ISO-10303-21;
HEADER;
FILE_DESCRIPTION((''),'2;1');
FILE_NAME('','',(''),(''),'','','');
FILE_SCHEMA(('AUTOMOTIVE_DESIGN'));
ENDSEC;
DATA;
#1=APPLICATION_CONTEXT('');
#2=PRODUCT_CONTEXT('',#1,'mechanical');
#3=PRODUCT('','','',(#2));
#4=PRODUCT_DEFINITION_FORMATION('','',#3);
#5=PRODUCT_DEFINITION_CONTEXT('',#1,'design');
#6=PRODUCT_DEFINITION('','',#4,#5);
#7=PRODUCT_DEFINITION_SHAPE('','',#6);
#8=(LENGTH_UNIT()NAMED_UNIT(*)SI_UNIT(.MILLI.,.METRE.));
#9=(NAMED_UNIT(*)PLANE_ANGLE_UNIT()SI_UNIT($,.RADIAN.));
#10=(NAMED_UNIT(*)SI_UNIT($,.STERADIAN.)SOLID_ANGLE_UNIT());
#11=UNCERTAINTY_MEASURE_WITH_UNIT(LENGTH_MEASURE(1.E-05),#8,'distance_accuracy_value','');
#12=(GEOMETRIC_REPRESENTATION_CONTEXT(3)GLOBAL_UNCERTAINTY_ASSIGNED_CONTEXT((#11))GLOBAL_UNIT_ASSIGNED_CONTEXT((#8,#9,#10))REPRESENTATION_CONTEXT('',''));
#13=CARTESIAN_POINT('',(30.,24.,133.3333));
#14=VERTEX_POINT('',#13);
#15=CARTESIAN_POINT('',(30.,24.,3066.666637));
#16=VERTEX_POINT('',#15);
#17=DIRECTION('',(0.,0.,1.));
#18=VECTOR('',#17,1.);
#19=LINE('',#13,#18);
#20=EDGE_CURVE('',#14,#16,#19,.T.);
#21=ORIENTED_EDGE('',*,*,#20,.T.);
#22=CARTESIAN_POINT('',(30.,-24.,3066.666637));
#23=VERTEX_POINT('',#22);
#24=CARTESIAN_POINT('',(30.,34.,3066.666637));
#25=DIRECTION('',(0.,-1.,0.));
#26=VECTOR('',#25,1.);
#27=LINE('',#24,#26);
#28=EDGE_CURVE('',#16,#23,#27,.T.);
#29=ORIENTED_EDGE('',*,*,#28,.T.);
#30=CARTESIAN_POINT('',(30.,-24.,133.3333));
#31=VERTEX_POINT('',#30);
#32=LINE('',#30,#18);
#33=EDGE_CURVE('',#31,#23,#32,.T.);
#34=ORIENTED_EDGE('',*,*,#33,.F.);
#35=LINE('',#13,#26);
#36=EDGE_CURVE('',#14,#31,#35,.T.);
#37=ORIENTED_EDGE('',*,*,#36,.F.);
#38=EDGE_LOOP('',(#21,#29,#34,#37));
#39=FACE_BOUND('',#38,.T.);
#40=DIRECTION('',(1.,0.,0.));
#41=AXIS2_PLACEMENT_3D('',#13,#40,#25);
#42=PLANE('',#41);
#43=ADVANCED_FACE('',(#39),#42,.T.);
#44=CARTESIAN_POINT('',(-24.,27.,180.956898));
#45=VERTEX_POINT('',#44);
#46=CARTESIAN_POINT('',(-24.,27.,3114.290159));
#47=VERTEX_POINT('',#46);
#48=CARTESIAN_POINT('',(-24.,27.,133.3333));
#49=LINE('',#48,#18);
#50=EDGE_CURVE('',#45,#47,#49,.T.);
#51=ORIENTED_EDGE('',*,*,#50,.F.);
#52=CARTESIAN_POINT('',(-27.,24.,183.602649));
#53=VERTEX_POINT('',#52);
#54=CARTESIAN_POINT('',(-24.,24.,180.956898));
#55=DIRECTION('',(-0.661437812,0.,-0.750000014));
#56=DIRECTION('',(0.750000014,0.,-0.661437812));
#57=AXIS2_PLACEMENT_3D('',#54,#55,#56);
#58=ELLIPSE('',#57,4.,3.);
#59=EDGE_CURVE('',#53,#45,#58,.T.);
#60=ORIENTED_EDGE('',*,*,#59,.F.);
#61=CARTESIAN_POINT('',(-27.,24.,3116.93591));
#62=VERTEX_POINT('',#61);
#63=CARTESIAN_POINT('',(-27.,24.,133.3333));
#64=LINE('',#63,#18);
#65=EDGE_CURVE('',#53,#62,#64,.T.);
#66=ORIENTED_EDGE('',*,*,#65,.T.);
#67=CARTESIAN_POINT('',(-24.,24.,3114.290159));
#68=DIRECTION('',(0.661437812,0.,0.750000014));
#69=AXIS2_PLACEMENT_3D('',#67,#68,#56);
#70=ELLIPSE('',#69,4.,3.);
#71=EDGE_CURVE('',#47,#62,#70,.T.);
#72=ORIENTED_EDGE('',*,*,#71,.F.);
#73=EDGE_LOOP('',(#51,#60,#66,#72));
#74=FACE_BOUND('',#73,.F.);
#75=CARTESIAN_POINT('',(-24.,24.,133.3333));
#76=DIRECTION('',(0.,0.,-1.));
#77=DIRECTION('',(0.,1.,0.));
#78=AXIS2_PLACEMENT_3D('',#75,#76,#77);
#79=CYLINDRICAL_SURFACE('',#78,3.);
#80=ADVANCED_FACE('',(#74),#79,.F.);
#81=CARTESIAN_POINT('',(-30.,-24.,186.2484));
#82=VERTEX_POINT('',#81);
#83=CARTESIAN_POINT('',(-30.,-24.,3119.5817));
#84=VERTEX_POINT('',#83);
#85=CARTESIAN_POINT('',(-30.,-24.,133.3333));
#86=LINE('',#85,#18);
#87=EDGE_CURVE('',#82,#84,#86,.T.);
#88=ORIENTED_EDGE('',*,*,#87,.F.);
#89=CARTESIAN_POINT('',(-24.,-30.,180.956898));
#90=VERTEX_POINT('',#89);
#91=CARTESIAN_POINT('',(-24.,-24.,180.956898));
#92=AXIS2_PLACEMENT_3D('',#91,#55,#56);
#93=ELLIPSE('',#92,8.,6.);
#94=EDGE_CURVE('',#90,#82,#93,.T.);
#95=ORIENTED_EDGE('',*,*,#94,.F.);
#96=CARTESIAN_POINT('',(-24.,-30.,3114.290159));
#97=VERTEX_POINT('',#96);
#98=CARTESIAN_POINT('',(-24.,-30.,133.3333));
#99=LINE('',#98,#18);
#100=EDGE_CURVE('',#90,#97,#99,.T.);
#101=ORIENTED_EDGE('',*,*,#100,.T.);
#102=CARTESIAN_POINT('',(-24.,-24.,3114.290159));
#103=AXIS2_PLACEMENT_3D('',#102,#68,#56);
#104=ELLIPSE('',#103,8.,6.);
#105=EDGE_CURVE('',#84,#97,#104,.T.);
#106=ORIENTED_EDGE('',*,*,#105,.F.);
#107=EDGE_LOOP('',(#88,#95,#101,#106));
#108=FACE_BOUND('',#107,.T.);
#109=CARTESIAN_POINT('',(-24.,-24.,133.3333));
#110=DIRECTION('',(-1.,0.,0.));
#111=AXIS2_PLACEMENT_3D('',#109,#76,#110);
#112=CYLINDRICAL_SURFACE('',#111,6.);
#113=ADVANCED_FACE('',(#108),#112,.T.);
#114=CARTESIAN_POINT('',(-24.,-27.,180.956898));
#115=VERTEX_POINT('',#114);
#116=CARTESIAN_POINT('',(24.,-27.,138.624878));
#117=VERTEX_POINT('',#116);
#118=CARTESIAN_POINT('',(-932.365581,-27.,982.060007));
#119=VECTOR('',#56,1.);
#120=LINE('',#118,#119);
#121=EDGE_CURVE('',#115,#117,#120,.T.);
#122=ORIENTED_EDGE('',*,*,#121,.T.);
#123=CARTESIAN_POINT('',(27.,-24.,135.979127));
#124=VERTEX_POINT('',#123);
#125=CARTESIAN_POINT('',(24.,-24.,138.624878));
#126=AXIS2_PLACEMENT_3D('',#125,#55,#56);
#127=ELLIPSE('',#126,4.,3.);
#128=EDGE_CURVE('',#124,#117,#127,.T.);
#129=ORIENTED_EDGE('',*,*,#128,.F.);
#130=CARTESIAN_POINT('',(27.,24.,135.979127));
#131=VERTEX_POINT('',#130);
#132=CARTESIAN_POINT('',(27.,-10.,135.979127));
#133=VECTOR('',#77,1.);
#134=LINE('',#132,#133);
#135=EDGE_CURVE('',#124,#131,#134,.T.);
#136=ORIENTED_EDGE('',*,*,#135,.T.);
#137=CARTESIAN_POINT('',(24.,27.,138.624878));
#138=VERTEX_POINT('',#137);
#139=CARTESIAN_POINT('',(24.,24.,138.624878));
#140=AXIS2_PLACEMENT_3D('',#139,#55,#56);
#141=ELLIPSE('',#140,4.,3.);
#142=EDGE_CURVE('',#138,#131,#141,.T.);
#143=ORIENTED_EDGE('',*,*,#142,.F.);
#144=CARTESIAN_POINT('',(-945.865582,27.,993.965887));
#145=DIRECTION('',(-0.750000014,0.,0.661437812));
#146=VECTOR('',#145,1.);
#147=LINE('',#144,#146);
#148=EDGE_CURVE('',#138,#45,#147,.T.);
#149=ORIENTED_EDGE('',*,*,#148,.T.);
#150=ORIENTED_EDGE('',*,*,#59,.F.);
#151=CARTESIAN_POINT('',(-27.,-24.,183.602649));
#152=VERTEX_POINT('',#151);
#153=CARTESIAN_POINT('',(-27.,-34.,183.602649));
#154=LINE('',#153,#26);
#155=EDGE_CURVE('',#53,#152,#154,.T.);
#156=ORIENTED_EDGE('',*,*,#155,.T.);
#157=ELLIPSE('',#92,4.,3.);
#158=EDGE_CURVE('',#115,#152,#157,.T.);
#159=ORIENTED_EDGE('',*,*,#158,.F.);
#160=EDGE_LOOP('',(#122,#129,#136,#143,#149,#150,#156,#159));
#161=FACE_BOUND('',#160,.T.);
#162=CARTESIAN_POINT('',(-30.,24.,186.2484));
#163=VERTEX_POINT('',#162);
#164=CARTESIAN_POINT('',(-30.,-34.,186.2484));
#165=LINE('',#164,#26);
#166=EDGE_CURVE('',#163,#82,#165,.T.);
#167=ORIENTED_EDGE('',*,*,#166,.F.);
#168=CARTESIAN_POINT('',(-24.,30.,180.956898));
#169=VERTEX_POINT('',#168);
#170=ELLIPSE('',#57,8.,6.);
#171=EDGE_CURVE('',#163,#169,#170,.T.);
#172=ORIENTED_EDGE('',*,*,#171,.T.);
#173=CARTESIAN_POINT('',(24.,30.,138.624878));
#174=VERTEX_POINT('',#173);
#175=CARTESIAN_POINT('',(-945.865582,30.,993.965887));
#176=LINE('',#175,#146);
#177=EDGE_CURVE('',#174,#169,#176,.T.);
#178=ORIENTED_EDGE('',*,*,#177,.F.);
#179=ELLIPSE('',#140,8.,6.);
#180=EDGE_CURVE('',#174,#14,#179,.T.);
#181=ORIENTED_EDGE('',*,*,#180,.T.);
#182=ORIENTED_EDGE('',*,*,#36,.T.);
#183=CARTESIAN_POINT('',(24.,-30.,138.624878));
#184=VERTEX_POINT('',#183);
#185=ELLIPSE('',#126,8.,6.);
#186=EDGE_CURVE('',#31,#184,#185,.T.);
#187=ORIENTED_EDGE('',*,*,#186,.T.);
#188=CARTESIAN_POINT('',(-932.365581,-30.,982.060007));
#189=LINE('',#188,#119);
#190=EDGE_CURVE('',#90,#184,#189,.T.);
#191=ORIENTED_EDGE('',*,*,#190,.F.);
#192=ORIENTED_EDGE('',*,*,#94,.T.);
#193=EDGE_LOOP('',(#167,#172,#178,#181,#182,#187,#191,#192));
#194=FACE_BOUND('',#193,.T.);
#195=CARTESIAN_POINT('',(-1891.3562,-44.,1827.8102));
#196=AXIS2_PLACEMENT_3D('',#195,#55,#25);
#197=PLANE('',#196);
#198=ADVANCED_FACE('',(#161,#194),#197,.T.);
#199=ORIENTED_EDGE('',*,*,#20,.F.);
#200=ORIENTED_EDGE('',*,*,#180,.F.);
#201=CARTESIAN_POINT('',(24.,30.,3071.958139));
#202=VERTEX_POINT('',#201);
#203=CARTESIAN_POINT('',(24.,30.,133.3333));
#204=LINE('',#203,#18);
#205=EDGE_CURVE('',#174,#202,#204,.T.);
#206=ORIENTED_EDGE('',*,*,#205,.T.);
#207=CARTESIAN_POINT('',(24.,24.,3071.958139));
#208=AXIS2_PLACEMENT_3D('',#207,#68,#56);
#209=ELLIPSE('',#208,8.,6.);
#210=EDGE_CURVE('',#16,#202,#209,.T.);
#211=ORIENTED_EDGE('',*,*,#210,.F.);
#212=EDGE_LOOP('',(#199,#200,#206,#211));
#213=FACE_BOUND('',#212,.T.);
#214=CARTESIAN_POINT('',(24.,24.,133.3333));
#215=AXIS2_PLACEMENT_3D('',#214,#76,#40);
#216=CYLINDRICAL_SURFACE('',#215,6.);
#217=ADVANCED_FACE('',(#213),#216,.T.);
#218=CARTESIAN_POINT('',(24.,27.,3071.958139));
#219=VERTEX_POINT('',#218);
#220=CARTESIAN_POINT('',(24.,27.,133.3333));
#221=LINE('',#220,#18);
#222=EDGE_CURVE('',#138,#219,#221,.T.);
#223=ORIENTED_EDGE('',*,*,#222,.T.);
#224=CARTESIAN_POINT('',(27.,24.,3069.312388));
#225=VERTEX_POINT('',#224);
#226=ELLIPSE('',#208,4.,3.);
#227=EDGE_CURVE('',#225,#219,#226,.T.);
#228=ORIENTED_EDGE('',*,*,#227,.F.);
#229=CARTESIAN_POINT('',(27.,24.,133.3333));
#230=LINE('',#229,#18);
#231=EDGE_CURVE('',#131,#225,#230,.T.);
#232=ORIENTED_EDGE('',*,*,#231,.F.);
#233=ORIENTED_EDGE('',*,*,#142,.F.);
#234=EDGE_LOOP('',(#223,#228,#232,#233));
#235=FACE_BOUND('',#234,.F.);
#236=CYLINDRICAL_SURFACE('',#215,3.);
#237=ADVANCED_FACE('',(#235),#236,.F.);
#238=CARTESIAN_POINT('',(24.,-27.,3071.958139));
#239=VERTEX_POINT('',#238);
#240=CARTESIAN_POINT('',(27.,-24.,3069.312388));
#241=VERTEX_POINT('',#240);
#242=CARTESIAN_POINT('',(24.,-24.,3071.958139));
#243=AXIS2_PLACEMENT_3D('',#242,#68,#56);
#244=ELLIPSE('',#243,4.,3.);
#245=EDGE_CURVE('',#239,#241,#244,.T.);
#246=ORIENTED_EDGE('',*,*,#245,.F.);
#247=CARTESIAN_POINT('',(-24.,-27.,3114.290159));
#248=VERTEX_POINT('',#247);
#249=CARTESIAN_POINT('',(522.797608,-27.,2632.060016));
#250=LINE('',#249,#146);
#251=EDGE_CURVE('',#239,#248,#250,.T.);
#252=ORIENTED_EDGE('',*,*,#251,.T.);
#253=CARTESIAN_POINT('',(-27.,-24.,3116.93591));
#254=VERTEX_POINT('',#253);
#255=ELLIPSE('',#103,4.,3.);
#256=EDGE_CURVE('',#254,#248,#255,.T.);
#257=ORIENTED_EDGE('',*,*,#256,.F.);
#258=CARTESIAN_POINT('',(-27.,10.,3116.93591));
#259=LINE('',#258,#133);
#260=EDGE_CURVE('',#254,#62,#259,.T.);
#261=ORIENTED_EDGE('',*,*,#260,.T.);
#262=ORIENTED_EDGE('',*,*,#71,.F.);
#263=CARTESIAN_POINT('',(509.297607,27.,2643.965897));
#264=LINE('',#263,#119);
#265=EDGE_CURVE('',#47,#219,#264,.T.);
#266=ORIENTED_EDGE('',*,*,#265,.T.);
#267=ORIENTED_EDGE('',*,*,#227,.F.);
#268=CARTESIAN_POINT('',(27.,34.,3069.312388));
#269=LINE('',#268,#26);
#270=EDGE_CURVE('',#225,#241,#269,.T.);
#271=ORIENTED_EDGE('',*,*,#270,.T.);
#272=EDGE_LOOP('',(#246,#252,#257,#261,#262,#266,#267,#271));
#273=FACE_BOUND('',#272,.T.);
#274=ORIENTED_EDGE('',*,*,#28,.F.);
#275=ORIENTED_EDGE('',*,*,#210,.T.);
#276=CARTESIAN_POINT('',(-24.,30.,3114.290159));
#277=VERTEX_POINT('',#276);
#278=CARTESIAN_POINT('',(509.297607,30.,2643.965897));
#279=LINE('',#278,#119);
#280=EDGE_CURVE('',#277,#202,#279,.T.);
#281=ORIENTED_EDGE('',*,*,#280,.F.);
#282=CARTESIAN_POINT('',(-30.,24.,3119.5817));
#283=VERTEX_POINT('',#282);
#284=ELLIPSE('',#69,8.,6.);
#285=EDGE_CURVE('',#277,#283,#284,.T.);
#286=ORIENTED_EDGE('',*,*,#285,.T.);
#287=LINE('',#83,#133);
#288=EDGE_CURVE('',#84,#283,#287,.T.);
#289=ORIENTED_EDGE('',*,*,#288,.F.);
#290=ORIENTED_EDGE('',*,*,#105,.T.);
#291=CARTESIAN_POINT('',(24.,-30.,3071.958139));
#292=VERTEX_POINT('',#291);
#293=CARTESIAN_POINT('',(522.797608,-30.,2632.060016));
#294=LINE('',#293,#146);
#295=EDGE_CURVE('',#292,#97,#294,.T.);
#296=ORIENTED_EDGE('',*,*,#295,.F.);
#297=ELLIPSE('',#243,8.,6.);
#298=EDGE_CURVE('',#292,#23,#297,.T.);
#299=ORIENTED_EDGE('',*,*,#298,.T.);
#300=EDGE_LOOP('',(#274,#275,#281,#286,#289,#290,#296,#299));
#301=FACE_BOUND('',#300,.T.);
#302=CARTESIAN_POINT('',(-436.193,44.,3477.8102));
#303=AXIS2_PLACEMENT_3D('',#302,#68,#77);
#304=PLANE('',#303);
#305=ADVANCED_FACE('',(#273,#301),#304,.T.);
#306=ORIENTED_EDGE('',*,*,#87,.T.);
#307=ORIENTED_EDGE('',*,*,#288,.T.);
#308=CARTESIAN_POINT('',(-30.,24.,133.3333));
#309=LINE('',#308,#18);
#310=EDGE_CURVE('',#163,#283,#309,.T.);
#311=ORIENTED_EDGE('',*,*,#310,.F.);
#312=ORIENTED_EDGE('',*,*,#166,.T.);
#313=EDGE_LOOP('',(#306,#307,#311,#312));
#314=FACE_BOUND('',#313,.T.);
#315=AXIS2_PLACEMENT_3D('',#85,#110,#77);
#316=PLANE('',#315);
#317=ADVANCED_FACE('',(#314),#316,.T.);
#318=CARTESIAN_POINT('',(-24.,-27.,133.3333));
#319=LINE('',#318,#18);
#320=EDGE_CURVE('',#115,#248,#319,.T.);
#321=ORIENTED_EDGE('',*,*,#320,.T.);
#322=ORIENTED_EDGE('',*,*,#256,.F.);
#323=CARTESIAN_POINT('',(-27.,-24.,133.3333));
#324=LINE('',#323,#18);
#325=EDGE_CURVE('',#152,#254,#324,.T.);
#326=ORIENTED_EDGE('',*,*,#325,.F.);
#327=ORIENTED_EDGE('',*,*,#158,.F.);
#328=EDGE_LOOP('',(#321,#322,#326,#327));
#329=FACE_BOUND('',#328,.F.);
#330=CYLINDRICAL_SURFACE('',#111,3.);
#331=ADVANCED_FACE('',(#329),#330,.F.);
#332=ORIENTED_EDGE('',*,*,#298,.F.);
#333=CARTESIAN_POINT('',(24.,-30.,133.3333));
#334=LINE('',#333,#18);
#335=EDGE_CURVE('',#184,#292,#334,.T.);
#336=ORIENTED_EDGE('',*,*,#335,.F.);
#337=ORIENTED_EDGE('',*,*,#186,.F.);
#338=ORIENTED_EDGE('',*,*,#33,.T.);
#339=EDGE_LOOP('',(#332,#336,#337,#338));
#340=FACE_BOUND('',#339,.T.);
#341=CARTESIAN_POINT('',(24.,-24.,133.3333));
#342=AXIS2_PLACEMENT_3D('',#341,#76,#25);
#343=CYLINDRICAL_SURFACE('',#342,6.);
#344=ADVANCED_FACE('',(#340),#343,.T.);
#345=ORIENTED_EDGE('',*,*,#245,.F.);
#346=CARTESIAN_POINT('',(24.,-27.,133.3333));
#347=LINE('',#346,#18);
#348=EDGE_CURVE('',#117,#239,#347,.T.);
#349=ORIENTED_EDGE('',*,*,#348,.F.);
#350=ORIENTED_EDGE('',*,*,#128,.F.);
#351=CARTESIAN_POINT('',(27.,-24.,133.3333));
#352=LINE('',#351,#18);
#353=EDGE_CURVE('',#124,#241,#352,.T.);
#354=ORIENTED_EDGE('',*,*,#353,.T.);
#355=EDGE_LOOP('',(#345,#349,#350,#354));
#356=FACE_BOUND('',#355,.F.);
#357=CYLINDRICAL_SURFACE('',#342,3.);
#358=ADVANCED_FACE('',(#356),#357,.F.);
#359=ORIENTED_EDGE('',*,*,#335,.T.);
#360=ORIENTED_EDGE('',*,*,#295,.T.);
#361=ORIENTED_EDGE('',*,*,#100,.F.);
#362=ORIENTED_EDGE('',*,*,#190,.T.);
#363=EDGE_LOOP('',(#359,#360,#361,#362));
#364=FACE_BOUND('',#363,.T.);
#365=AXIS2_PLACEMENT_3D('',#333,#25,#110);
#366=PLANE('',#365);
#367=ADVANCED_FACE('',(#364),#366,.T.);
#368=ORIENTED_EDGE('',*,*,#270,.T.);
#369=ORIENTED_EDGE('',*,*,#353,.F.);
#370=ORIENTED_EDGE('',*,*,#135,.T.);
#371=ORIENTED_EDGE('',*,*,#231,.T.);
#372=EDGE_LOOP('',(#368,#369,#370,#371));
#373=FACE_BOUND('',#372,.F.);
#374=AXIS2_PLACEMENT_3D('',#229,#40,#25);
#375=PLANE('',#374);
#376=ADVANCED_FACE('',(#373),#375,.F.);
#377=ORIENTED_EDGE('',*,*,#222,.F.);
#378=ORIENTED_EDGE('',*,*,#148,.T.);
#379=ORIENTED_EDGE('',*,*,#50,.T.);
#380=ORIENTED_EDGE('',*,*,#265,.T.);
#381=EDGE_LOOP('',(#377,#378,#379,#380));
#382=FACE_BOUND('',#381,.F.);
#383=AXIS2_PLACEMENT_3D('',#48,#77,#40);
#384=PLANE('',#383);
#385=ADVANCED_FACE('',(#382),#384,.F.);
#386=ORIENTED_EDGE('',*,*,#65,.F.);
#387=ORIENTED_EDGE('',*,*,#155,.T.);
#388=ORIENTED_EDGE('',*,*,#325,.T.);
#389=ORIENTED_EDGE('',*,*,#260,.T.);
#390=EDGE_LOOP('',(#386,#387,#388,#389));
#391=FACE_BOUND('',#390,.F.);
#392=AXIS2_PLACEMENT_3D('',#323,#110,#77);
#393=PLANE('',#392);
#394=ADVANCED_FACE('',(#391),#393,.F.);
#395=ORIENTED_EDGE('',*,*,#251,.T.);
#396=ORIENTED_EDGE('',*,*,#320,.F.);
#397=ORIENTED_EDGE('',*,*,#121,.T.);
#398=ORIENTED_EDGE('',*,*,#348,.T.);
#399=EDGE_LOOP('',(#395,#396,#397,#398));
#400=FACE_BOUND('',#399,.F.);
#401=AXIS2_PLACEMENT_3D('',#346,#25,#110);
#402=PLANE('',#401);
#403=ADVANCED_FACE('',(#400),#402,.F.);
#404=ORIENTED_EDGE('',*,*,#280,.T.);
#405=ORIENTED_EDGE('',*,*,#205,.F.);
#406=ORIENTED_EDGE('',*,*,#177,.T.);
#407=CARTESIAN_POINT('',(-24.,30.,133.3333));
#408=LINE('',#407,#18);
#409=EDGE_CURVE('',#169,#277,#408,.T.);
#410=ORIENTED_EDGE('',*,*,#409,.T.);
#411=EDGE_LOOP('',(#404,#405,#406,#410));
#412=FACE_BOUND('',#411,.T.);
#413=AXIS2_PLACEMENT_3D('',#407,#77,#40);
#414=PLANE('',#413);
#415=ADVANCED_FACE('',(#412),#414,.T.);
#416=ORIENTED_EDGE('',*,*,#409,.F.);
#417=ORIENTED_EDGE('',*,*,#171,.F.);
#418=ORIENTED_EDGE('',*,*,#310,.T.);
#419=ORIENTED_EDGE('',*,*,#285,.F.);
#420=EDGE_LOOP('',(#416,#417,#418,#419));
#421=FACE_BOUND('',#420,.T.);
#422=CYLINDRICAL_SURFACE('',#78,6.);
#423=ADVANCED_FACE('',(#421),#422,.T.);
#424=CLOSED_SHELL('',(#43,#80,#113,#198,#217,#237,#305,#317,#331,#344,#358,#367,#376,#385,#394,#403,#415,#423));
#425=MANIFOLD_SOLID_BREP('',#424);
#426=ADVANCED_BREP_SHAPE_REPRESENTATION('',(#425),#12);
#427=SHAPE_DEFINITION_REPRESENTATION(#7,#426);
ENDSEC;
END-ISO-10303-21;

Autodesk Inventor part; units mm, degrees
ref_plane "Start plane" through (0, 0, 133.3333) normal (0, 0, 1) x (1, 0, 0)
ref_plane "End plane" through (0, 0, 3119.5817) normal (0, 0, 1) x (1, 0, 0)
sketch "Sketch" plane through (0, 0, 0) normal (0, 0, 1) x (1, 0, 0)
  line L0 (-30, -24) -> (-30, 24)
  line L1 (-24, 30) -> (24, 30)
  line L2 (30, 24) -> (30, -24)
  line L3 (24, -30) -> (-24, -30)
  arc A0 (-30, -24) -> (-24, -30) centre (-24, -24) ccw
  arc A1 (30, 24) -> (24, 30) centre (24, 24) ccw
  arc A2 (-24, 30) -> (-30, 24) centre (-24, 24) ccw
  arc A3 (24, -30) -> (30, -24) centre (24, -24) ccw
  arc A4 (-24, 27) -> (-27, 24) centre (-24, 24) ccw
  line L4 (-24, 27) -> (24, 27)
  arc A5 (27, 24) -> (24, 27) centre (24, 24) ccw
  line L5 (27, 24) -> (27, -24)
  arc A6 (24, -27) -> (27, -24) centre (24, -24) ccw
  line L6 (24, -27) -> (-24, -27)
  arc A7 (-27, -24) -> (-24, -27) centre (-24, -24) ccw
  line L7 (-27, -24) -> (-27, 24)
  line L8 (0, 43.7397) -> (0, -43.7397) construction
  line L9 (-43.7397, 0) -> (43.7397, 0) construction
  dimension "d7" = 6
  dimension "d9" = 60
  dimension "d11" = 60
  dimension "d12" = 3
  dimension "d15" = 30
  dimension "d16" = 30
extrude "Body" add sketch "Sketch" along normal up to surface (2986.2484 mm away) from surface at 133.3333
sketch "Sketch3" plane through (0, 0, 0) normal (0, 0, 1) x (1, 0, 0)
  line L0 (0, 0) -> (10, 0)
ref_plane "Work Plane3" through (0, 0, 0) normal (0, -1, 0) x (1, 0, 0)
ref_plane "Work Plane4" through (-1891.3562, -44, 1827.8102) normal (-0.6614378, 0, -0.75) x (-0.75, 0, 0.6614378)
split "Split1" plane through (-1891.3562, -44, 1827.8102) removes the side toward (-0.6614378, 0, -0.75)
ref_plane "Work Plane5" through (-436.193, 44, 3477.8102) normal (0.6614378, 0, 0.75) x (0.75, 0, -0.6614378)
split "Split2" plane through (-436.193, 44, 3477.8102) removes the side toward (0.6614378, 0, 0.75)
sketch "Sketch4" plane through (0, 0, 0) normal (0, -1, 0) x (1, 0, 0)
  line L0 (-2, 133.3333) -> (12, 133.3333) projected
  line L1 (-2, 3119.5817) -> (12, 3119.5817) projected
  dimension "d18" = 2986.2484
equation "\"d7\" = G_IR"
equation "\"d9\" = G_W"
equation "\"d11\" = G_H"
equation "\"d12\" = G_T"
equation "\"d15\" = 0.5 * d9"
equation "\"d16\" = 0.5 * d11"
equation "\"d3\" = G_L"
equation "\"G_W\" = 60"
equation "\"G_H\" = 60"
equation "\"G_T\" = 3"
equation "\"G_IR\" = 6"
equation "\"G_L\" = d18"
equation "\"G_OFFSET_START\" = -133.33333"
equation "\"G_OFFSET_END\" = -80.41831"
equation "\"d13\" = -G_OFFSET_START"
equation "\"d14\" = G_OFFSET_END + B_L"
equation "\"B_L\" = 3200"
properties part number "ISO 10799-2 - 60x60x3 - 2986,25" material "Steel, Mild"
